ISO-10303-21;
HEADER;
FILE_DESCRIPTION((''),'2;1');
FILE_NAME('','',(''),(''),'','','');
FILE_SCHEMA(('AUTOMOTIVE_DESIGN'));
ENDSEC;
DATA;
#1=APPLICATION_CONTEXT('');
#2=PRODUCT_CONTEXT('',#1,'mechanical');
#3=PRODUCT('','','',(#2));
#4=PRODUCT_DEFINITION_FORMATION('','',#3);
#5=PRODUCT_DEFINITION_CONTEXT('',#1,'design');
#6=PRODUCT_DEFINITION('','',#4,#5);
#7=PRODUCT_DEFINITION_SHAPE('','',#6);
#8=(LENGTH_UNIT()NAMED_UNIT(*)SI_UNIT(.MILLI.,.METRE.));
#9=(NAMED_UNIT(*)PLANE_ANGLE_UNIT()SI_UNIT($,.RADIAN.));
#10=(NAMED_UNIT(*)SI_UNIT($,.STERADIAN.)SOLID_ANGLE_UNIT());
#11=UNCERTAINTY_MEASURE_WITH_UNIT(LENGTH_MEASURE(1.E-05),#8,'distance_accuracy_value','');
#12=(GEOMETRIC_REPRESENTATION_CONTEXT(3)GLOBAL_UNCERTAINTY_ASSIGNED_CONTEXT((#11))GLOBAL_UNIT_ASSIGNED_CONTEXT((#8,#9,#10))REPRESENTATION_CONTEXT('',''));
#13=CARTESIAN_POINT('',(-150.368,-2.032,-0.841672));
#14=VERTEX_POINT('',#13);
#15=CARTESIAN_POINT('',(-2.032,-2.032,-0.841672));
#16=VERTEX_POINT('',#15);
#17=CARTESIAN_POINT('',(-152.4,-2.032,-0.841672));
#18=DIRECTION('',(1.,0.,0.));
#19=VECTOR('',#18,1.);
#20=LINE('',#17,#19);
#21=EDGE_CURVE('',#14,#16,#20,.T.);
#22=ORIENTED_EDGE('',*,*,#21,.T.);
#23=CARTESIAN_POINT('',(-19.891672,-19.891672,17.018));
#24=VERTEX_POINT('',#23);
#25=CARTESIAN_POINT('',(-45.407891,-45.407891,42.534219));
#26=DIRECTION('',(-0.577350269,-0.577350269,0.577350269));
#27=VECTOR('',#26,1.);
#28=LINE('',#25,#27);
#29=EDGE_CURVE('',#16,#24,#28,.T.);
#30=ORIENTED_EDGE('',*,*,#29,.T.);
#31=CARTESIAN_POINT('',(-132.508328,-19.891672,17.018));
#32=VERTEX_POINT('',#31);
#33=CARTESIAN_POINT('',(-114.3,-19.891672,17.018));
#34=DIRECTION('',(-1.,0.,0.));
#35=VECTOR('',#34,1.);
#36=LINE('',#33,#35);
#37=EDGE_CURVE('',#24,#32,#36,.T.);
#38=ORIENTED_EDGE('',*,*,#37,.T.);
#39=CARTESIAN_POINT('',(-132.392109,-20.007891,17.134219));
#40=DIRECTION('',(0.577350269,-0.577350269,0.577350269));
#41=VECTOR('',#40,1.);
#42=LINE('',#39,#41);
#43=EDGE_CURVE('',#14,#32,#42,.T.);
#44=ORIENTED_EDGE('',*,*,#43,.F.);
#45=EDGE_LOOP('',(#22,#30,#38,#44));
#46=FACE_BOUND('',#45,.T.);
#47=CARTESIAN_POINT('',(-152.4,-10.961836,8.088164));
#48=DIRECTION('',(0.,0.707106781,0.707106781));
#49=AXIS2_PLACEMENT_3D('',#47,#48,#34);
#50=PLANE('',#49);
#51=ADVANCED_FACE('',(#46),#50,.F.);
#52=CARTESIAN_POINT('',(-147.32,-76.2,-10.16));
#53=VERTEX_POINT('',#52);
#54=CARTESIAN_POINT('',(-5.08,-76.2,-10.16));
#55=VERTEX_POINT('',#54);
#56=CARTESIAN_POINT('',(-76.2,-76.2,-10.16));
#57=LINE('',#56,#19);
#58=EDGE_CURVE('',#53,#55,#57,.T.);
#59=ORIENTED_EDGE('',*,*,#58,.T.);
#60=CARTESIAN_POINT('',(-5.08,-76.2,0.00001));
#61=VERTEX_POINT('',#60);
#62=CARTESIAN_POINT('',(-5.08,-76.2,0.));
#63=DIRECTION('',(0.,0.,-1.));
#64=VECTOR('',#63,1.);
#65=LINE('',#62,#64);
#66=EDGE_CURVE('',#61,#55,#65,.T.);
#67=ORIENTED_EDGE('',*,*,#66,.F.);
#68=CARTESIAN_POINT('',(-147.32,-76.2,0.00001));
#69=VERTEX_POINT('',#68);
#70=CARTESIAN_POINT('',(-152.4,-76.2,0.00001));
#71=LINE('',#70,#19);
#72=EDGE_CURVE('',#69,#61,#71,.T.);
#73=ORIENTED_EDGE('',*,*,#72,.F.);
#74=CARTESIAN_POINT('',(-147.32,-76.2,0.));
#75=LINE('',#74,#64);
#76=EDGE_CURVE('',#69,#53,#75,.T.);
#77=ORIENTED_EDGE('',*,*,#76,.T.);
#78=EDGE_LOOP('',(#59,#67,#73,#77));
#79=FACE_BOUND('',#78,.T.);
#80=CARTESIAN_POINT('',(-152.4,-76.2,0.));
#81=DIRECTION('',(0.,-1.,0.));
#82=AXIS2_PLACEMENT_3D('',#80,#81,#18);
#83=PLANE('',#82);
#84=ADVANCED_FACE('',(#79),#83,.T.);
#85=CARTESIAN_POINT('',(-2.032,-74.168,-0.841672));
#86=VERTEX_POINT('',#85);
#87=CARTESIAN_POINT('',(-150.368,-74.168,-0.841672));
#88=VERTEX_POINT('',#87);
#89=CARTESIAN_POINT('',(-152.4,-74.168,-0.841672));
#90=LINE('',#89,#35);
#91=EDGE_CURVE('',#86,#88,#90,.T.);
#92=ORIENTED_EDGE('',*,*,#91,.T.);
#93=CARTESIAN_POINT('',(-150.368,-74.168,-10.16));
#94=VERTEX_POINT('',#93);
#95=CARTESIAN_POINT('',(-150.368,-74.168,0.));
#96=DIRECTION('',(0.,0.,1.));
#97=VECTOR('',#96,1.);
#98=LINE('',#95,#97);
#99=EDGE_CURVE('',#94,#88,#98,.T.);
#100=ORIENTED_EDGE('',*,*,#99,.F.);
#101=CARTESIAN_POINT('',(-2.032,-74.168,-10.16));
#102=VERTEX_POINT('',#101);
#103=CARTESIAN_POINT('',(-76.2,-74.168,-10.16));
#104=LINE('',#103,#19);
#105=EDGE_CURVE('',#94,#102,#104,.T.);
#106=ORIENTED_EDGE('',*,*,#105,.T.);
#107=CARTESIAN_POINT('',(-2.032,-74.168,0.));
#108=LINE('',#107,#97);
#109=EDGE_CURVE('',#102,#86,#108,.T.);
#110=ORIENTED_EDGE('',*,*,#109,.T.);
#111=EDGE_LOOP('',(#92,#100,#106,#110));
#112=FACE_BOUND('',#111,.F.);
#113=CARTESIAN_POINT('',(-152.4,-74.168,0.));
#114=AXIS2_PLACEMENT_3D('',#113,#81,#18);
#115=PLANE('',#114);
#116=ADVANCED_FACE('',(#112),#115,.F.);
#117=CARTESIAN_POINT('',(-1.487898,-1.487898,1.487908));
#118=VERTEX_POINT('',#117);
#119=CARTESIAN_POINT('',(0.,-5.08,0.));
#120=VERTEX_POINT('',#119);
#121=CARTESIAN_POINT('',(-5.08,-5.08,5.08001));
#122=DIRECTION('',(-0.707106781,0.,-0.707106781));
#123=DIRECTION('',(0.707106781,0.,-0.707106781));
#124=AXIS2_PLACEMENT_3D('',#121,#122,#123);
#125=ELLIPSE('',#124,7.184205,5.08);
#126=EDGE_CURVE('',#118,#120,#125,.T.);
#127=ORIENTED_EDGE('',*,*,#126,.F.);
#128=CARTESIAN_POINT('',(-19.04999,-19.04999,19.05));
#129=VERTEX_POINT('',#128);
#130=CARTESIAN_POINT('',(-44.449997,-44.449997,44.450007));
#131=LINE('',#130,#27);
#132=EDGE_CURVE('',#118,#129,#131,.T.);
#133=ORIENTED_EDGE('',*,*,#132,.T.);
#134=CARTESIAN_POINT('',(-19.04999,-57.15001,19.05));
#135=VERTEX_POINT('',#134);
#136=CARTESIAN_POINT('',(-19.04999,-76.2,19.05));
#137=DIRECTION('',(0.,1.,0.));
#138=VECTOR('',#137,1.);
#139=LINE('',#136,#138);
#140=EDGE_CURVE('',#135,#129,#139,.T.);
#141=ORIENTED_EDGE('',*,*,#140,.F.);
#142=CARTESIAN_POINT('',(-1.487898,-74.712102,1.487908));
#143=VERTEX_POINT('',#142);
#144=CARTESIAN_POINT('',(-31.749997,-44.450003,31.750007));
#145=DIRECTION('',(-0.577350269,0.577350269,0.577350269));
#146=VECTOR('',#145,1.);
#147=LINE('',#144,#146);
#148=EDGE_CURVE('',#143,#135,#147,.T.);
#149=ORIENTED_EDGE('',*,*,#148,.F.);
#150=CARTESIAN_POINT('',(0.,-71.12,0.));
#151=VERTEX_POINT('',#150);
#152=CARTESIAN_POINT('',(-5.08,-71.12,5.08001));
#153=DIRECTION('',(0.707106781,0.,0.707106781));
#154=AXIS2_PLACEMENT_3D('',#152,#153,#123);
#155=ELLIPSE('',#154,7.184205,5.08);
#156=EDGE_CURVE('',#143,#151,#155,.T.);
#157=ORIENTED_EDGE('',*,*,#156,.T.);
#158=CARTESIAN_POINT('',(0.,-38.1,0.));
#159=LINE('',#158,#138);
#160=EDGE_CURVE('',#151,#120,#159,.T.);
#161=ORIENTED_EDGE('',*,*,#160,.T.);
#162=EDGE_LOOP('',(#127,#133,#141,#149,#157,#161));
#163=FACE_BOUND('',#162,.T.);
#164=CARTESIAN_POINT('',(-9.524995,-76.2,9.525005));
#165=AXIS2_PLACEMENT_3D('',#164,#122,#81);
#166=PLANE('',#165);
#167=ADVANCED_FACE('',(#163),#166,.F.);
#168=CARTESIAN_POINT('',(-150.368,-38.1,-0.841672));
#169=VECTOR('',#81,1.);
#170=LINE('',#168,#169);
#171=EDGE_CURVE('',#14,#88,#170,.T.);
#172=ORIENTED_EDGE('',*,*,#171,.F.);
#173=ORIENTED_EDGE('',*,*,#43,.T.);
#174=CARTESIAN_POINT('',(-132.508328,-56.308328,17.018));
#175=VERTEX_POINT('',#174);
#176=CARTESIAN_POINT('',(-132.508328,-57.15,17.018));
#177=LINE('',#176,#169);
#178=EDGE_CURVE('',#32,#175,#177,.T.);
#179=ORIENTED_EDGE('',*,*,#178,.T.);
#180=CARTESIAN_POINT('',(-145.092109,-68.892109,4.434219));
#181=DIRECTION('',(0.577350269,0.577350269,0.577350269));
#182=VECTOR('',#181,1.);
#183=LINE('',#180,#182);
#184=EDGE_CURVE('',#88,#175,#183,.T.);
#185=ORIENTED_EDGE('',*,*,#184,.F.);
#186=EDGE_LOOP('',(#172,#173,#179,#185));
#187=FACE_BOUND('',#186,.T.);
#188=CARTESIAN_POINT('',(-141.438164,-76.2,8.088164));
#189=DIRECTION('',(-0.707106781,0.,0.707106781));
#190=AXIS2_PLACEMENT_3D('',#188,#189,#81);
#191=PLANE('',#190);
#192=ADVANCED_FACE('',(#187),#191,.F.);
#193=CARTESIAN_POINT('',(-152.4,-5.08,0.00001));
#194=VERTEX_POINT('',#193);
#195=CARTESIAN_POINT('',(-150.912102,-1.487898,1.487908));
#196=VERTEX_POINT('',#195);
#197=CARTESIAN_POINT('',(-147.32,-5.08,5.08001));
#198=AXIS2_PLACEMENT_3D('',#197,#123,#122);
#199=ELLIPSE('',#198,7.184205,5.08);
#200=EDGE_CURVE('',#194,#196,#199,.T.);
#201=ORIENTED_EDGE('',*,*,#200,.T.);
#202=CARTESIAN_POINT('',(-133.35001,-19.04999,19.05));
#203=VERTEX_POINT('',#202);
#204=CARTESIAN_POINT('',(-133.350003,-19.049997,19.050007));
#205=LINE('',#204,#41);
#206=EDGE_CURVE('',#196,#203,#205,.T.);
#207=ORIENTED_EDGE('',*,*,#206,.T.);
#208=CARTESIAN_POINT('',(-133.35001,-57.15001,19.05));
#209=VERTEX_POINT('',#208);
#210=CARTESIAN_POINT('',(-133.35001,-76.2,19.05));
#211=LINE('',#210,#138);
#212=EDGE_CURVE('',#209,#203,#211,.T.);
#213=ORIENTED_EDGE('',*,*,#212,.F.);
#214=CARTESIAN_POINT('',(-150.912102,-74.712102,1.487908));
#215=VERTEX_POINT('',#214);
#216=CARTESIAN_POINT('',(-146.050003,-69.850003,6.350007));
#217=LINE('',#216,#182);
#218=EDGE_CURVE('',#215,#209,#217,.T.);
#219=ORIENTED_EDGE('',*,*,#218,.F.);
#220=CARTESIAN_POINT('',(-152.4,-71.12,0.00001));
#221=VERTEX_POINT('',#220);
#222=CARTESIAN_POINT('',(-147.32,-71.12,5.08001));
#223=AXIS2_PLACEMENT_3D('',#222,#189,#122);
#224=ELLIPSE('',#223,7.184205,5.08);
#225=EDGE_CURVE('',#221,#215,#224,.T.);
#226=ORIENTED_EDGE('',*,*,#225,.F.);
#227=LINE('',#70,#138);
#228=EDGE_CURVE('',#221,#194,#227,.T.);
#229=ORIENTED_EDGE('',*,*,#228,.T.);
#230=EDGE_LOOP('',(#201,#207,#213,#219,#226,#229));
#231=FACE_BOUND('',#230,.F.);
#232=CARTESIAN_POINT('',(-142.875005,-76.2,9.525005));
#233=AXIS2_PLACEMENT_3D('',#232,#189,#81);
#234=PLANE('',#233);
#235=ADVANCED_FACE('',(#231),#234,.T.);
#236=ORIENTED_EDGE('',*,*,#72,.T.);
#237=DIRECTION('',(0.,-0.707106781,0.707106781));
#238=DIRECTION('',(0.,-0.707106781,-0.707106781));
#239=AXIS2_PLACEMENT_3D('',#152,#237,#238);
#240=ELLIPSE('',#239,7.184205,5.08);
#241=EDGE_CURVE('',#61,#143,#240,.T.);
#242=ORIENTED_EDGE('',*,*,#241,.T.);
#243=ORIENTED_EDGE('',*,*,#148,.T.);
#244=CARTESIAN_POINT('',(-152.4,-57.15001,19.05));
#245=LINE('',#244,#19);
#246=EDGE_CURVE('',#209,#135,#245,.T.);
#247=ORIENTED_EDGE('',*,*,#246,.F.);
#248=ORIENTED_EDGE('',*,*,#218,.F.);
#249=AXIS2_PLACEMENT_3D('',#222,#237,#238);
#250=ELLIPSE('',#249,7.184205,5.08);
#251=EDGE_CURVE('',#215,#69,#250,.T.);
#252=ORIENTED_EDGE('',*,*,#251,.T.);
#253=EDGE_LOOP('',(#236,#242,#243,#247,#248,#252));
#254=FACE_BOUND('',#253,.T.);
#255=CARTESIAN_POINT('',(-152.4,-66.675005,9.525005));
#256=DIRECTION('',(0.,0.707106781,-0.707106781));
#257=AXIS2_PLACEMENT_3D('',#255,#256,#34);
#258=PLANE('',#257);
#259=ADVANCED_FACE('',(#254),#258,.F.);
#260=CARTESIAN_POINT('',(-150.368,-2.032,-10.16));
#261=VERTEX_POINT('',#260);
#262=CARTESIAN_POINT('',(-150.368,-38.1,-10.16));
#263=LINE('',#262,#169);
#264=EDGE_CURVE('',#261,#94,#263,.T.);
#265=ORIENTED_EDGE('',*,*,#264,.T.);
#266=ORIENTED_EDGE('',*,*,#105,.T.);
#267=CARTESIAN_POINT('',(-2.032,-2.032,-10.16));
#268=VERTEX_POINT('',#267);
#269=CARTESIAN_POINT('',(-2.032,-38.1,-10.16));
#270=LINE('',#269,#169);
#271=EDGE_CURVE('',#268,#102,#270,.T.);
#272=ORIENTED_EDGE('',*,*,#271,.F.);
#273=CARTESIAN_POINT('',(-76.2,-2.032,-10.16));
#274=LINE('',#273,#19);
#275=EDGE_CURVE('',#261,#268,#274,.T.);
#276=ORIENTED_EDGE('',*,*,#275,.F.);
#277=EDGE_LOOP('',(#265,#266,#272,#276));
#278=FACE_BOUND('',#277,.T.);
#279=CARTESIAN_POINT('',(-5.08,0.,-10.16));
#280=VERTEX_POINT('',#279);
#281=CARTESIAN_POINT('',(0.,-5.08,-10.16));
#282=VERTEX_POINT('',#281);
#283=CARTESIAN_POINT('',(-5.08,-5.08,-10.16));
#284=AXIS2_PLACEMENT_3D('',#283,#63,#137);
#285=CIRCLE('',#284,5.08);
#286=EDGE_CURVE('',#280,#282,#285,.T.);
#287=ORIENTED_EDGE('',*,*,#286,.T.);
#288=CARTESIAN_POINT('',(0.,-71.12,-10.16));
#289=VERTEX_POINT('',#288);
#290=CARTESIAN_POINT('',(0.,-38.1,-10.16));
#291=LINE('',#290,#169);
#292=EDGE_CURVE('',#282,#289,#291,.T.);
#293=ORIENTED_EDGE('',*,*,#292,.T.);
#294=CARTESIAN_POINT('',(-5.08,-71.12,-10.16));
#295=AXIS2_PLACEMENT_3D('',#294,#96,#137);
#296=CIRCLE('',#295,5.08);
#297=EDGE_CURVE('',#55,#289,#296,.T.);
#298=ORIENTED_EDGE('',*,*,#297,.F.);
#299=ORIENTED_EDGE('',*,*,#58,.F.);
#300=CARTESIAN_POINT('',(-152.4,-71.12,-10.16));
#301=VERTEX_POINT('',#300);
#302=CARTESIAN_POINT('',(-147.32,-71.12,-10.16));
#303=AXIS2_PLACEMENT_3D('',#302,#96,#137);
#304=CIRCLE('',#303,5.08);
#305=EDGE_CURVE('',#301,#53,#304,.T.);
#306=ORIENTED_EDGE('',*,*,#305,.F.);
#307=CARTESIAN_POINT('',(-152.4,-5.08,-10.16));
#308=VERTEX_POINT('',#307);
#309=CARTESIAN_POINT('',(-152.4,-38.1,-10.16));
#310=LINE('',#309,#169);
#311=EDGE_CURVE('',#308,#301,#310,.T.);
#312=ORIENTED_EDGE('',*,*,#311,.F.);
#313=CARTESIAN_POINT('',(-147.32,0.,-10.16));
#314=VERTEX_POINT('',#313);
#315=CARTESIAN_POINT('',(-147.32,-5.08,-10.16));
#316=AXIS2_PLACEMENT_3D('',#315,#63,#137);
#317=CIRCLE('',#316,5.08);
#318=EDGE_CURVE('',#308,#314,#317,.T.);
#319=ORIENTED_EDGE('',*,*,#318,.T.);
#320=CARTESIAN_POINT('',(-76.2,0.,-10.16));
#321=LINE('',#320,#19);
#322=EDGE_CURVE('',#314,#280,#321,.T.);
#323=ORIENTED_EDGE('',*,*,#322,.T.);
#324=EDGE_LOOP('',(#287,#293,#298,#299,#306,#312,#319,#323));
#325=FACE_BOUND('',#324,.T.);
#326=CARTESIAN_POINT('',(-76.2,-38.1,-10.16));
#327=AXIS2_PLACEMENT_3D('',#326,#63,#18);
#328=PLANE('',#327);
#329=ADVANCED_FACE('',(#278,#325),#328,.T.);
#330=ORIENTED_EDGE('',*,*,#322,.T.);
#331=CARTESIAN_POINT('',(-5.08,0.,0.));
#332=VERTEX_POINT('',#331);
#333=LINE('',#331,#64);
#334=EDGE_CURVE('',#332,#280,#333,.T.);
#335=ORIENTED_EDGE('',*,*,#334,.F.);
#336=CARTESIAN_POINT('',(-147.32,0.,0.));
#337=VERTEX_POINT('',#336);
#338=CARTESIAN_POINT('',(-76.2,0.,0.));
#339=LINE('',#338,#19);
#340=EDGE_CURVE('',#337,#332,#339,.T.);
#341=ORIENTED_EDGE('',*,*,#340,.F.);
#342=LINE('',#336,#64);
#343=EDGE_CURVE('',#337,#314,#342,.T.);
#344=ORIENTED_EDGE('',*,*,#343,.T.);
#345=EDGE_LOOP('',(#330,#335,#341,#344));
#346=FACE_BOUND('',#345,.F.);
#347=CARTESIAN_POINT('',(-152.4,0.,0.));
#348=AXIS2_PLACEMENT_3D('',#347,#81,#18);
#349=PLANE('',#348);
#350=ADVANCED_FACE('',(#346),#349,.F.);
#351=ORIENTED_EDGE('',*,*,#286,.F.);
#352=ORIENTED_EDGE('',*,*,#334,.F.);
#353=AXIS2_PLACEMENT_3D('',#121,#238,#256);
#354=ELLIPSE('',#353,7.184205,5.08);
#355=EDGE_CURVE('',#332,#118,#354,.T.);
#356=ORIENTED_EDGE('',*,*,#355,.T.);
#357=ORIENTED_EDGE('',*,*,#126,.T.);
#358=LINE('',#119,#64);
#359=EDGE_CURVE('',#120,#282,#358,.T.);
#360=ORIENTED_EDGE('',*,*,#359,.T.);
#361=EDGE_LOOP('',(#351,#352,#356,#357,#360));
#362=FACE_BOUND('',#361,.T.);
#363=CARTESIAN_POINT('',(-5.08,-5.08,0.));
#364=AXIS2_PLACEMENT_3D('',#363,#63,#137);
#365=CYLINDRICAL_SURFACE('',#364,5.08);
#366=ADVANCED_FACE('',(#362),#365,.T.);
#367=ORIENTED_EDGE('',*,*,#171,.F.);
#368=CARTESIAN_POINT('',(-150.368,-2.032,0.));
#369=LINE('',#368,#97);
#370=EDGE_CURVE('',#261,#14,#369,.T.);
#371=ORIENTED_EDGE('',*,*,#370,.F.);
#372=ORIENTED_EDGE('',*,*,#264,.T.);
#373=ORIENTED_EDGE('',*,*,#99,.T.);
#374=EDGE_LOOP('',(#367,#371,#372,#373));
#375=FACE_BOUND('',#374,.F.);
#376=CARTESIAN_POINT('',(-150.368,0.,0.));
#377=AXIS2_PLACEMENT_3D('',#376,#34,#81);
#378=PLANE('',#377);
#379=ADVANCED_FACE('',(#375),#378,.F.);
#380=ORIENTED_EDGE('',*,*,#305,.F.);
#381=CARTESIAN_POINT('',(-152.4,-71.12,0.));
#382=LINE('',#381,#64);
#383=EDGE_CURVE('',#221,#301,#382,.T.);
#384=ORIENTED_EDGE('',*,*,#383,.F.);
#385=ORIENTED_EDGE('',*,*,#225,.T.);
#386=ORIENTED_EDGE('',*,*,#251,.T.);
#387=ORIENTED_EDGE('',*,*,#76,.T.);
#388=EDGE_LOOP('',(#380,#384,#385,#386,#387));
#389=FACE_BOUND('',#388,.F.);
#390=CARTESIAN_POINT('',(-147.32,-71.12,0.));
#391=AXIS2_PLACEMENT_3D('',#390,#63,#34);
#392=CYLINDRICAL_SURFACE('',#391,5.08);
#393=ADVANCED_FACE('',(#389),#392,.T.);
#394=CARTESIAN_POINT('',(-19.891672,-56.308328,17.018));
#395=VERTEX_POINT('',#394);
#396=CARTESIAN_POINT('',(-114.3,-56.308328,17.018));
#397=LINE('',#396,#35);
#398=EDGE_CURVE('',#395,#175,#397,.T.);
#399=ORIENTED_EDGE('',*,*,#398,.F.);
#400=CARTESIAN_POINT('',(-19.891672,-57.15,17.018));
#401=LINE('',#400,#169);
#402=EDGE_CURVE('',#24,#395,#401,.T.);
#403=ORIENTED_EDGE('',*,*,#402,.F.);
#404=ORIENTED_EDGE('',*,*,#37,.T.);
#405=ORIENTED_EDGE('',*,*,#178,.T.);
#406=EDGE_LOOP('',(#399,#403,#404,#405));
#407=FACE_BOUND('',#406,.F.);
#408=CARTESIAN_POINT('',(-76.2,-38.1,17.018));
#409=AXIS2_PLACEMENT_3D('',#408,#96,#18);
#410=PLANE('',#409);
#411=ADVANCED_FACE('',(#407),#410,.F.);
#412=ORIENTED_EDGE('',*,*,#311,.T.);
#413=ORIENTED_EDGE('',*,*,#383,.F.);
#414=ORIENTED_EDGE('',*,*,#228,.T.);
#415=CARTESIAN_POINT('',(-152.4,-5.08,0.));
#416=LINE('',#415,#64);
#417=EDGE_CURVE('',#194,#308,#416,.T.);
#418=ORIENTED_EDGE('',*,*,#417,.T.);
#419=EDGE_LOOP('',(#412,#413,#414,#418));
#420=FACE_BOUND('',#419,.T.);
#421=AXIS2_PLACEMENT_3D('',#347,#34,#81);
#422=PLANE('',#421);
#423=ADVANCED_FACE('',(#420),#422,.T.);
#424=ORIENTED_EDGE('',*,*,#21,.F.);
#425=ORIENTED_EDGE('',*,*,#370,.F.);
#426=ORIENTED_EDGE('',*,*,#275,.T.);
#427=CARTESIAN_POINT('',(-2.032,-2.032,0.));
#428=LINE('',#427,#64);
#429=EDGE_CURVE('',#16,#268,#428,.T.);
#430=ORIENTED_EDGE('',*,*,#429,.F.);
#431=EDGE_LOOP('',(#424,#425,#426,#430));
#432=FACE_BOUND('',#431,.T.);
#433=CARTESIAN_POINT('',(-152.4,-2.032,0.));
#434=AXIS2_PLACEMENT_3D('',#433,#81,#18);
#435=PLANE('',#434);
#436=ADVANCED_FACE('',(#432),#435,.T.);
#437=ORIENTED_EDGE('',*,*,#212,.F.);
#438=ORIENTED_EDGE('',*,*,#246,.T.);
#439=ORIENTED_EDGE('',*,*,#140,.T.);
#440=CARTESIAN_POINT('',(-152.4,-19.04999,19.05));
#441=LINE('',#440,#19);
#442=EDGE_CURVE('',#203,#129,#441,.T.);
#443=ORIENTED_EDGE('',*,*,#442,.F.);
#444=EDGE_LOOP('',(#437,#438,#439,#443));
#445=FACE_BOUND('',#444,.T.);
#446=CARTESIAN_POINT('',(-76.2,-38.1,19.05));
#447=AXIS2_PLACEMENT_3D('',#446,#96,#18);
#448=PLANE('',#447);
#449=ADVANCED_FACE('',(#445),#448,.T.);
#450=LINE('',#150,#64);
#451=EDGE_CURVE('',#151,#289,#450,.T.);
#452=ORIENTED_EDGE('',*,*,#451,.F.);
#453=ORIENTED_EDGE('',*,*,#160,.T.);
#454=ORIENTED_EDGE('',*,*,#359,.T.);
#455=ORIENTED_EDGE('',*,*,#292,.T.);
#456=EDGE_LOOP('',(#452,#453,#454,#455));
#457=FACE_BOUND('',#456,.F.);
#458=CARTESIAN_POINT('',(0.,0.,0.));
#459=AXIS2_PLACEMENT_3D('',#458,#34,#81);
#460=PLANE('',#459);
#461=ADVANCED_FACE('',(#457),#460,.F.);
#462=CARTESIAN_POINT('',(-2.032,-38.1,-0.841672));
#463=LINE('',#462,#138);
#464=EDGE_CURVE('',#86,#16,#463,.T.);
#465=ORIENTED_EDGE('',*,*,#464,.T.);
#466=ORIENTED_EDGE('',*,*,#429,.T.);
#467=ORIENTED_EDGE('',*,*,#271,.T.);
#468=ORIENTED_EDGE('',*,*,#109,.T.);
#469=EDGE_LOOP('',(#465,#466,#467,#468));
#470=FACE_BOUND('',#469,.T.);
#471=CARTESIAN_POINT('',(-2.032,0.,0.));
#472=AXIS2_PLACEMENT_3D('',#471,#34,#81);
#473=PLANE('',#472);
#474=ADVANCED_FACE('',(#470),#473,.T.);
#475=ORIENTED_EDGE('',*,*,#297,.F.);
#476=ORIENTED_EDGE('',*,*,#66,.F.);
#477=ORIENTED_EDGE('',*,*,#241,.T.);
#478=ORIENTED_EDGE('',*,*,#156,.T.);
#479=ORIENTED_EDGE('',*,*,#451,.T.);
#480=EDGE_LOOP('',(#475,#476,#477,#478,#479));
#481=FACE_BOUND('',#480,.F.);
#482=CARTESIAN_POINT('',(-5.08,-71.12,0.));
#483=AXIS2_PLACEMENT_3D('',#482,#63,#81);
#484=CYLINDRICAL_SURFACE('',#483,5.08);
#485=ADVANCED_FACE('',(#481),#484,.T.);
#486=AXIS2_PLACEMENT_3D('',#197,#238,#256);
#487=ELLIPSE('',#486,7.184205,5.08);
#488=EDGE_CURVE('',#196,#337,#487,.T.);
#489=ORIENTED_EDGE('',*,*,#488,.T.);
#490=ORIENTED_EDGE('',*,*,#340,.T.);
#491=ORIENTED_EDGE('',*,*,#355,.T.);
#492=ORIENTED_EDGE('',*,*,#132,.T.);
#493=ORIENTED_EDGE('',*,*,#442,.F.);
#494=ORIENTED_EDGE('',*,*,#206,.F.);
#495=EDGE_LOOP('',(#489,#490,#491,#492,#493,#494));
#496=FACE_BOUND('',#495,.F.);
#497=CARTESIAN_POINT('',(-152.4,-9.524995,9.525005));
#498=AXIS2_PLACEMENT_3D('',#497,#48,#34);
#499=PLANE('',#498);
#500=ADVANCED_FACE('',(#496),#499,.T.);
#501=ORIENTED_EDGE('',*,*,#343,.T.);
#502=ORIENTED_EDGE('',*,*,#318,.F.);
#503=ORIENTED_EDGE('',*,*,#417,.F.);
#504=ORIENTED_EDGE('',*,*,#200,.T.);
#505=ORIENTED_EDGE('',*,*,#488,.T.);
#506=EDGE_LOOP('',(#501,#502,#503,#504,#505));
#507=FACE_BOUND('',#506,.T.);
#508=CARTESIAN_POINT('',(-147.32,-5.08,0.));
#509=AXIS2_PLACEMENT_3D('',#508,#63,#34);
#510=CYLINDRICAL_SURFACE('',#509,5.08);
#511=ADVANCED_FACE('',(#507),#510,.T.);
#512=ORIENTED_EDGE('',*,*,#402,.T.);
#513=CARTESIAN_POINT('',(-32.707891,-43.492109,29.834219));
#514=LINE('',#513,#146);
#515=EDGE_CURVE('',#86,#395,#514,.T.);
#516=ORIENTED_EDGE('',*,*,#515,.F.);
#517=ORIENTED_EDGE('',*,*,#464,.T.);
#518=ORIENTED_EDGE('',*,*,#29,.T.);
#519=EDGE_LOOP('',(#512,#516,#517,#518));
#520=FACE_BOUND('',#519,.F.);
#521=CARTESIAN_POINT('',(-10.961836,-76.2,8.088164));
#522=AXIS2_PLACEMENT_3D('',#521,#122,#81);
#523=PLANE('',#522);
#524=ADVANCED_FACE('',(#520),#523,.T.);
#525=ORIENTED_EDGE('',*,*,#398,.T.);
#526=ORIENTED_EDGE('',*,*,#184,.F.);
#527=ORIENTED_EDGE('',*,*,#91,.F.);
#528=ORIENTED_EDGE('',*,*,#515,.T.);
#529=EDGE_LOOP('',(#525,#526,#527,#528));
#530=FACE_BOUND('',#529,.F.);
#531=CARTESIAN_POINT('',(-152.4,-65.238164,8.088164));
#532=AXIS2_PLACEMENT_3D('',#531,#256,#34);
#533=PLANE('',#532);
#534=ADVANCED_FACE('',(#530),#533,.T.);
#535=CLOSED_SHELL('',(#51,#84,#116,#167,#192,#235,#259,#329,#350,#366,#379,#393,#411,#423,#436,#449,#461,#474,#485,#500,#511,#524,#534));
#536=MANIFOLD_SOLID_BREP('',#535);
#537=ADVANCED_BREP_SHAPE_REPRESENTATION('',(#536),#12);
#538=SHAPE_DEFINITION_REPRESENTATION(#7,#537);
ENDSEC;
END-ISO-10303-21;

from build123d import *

# Parameters (mm, degrees)
F0_W     = 152.4
F0_H     = 76.2
F1_DEPTH = 19.05
F2_SIZE  = 19.04999
F3_W     = 152.4
F3_H     = 76.2
F4_DEPTH = 10.16
F5_T     = -2.032
F6_R     = 5.08


# Not quite as in the source:
# - a fillet or chamfer is up to 0.001 mm smaller than in the source, because OpenCascade refuses the exact size


with BuildPart() as f1:
    # F0 (on Top) → F1 (new body)
    with BuildSketch(Plane.XY):
        with Locations((-76.2, -38.1)):
            Rectangle(F0_W, F0_H)
    extrude(amount=F1_DEPTH)

    # F2 (size 19.05 in the source; OpenCascade refuses exactly that, so slightly less here)
    f2_edges = [f1.edges().sort_by_distance(p)[0] for p in [
        (0, -38.1, 19.05),
        (-76.2, 0, 19.05),
        (-152.4, -38.1, 19.05),
        (-76.2, -76.2, 19.05),
    ]]
    chamfer(f2_edges, length=F2_SIZE)

    # F3 (on face) → F4 (join)
    with BuildSketch(Plane(origin=(0, 0, 0), x_dir=(1, 0, 0), z_dir=(0, 0, -1))):
        with Locations((-76.2, 38.1)):
            Rectangle(F3_W, F3_H)
    extrude(amount=F4_DEPTH)

    # F5
    f5_openings = [f1.faces().sort_by_distance(p)[0] for p in [
        (-76.2, -38.1, -10.16),
    ]]
    offset(amount=F5_T, openings=f5_openings)

    # F6
    f6_edges = [f1.edges().sort_by_distance(p)[0] for p in [
        (0, 0, -5.08),
        (-152.4, 0, -5.08),
        (-152.4, -76.2, -5.08),
        (0, -76.2, -5.08),
    ]]
    fillet(f6_edges, radius=F6_R)


solid = f1.part
